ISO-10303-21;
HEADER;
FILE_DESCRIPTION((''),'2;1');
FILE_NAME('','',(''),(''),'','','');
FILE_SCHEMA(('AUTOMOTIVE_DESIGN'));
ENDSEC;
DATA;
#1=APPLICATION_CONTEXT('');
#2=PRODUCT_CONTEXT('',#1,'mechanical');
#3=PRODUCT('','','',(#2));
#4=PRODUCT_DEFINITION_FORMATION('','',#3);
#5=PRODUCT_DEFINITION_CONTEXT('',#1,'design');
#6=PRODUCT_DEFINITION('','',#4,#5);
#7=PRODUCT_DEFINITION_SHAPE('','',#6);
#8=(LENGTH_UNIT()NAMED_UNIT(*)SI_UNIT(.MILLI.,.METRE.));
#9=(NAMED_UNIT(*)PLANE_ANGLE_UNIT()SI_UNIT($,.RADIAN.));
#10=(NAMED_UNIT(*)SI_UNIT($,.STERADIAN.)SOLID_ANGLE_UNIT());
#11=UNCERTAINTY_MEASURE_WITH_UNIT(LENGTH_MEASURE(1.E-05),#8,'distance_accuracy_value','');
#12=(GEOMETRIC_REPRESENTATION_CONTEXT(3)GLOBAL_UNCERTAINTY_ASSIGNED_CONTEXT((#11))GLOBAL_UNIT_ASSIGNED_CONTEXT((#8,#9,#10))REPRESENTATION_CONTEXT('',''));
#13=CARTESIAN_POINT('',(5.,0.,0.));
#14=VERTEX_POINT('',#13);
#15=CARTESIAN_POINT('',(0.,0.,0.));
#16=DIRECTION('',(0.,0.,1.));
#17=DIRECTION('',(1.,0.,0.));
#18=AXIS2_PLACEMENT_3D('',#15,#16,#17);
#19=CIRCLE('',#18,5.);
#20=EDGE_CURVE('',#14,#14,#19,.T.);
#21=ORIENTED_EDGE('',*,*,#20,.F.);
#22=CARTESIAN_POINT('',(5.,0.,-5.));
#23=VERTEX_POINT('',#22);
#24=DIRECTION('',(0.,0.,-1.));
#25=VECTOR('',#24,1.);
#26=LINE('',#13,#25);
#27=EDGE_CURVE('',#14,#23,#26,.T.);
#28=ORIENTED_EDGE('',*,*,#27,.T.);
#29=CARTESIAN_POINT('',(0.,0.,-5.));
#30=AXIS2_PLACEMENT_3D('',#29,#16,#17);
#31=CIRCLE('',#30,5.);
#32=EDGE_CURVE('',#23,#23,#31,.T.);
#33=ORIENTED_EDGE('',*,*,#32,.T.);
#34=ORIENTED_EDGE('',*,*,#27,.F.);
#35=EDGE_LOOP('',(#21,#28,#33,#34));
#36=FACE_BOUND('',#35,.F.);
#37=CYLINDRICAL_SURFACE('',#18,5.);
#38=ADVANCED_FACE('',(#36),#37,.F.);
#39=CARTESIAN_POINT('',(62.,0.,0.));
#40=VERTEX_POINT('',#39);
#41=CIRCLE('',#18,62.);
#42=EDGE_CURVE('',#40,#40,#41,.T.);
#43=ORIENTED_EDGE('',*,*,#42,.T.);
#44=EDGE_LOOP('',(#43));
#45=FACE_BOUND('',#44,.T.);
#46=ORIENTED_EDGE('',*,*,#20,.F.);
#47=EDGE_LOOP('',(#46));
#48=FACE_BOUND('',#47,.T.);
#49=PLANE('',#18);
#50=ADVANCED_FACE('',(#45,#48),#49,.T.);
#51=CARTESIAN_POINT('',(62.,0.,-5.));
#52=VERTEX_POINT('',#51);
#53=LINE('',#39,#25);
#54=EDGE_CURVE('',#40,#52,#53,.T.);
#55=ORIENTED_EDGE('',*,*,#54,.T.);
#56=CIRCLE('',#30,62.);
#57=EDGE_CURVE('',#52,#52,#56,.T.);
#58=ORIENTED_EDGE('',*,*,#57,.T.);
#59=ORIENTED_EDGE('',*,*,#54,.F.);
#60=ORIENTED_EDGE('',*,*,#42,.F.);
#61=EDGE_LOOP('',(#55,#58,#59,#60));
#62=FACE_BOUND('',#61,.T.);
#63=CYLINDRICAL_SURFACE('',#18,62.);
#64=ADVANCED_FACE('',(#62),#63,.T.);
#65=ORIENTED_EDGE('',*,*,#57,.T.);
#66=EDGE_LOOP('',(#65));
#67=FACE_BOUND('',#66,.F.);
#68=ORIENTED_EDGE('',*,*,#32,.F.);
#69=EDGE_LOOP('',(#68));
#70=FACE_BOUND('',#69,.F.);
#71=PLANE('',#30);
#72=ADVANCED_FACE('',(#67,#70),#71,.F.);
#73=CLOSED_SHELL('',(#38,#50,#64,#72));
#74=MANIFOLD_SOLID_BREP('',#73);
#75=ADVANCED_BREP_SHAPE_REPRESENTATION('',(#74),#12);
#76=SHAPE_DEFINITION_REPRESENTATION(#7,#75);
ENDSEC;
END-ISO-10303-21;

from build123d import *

# Parameters (mm, degrees)
F0_R     = 62
F3_DEPTH = 5
F1_R     = 5
F4_DEPTH = 25


# Not quite as in the source:
# - the program builds the solid bodies; features that only make, move or delete a surface that nothing else refers to are left out


with BuildPart() as f3:
    # F0 (on Top) → F3 (new body)
    with BuildSketch(Plane.XY):
        Circle(F0_R)
    extrude(amount=-F3_DEPTH)

    # F1 (on Top) → F4 (cut)
    with BuildSketch(Plane.XY):
        Circle(F1_R)
    extrude(amount=-F4_DEPTH, mode=Mode.SUBTRACT)


solid = f3.part
